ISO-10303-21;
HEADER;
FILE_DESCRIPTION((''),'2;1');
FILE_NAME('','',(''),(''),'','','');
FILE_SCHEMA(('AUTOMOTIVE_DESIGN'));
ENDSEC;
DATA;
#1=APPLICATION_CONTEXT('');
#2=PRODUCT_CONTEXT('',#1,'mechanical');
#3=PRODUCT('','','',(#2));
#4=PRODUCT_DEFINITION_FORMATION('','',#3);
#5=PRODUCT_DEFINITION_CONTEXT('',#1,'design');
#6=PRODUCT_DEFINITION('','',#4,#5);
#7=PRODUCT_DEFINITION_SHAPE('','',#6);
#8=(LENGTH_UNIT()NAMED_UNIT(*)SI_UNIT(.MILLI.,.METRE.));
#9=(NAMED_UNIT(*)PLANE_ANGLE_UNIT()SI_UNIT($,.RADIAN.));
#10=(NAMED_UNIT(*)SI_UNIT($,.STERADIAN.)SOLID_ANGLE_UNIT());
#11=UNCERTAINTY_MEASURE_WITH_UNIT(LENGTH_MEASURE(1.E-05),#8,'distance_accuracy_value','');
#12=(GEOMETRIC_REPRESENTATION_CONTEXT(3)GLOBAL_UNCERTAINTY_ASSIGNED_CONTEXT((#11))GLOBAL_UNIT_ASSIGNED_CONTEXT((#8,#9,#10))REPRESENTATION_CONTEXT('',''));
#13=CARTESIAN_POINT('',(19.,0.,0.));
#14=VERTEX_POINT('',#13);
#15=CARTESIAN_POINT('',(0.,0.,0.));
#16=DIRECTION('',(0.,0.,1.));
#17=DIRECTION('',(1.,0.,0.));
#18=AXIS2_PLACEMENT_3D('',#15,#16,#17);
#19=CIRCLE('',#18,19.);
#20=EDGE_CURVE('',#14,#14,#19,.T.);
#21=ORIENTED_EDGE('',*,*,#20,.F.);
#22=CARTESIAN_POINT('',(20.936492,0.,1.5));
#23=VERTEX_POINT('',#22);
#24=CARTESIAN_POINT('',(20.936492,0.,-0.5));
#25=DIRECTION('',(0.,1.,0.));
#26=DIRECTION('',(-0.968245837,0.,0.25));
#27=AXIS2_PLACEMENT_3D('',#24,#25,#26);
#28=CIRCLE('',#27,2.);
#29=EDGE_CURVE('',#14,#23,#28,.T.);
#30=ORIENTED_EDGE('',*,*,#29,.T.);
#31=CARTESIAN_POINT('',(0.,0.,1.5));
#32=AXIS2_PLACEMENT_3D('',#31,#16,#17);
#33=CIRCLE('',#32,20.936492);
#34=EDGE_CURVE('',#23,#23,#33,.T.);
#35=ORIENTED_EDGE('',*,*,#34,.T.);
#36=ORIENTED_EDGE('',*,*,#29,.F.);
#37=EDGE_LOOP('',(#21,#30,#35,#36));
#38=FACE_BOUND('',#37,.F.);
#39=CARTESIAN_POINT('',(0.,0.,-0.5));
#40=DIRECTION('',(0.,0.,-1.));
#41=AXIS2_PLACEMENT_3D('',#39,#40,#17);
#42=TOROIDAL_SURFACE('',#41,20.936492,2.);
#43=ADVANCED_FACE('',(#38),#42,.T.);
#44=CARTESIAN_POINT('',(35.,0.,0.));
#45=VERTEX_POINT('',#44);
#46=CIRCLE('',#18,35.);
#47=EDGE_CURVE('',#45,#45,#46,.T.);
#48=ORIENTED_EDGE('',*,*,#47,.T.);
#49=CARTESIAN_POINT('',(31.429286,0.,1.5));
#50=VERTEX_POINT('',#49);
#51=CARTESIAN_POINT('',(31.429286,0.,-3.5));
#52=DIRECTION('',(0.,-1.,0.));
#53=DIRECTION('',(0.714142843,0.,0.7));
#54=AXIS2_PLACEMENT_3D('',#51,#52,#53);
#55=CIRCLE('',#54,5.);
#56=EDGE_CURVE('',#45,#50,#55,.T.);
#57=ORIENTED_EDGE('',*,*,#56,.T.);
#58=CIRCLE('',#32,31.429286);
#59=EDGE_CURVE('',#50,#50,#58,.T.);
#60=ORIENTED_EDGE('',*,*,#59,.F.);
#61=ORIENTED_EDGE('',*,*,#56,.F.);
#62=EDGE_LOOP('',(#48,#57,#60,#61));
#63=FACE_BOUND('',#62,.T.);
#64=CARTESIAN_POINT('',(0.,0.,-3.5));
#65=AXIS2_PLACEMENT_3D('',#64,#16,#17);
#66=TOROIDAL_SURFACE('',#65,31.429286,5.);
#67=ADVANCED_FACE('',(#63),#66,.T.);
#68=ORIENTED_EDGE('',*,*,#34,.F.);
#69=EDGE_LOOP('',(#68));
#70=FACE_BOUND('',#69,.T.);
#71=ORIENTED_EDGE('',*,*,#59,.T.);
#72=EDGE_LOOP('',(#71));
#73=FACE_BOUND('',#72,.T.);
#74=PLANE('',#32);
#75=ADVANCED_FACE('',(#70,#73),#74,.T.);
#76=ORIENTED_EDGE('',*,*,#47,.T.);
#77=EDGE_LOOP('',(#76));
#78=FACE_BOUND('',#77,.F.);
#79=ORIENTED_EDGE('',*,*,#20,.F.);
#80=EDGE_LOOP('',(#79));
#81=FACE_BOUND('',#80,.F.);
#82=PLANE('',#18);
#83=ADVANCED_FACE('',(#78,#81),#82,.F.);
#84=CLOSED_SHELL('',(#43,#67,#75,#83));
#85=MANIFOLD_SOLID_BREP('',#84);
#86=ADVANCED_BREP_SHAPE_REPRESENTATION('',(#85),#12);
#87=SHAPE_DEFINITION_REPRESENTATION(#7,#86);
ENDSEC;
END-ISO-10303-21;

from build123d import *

# Parameters (mm, degrees)
F0_R     = 35
F0_R_2   = 19
F1_DEPTH = 1.5


# Not quite as in the source:
# - a fillet or chamfer that OpenCascade refuses, or shapes differently, is made with other operations: its cross-section is extruded or revolved along the edge and cut away or added


with BuildPart() as f1:
    # F0 (on Top) → F1 (new body)
    with BuildSketch(Plane.XY):
        Circle(F0_R)
        Circle(F0_R_2, mode=Mode.SUBTRACT)
    extrude(amount=F1_DEPTH)

    # F2: fillet of radius 2 on 1 edges, made by hand

    # F2_s1 → F2_t2 (revolve, cut)
    with BuildSketch(Plane.XZ):
        with BuildLine():
            ThreePointArc((19, 0), (19.7117468017, 1.0811388301), (20.9364916731, 1.5))
            Line((20.9364916731, 1.5), (19, 1.5))
            Line((19, 1.5), (19, 0))
        make_face()
    revolve(axis=Axis((0, 0, 1.5), (0, 0, 1)), mode=Mode.SUBTRACT)

    # F3: fillet of radius 5 on 1 edges, made by hand

    # F3_s1 → F3_t2 (revolve, cut)
    with BuildSketch(Plane.XZ):
        with BuildLine():
            ThreePointArc((35, 0), (33.3657774588, 1.1097722286), (31.4292857857, 1.5))
            Line((31.4292857857, 1.5), (35, 1.5))
            Line((35, 1.5), (35, 0))
        make_face()
    revolve(axis=Axis((0, 0, 1.5), (0, 0, 1)), mode=Mode.SUBTRACT)


solid = f1.part
